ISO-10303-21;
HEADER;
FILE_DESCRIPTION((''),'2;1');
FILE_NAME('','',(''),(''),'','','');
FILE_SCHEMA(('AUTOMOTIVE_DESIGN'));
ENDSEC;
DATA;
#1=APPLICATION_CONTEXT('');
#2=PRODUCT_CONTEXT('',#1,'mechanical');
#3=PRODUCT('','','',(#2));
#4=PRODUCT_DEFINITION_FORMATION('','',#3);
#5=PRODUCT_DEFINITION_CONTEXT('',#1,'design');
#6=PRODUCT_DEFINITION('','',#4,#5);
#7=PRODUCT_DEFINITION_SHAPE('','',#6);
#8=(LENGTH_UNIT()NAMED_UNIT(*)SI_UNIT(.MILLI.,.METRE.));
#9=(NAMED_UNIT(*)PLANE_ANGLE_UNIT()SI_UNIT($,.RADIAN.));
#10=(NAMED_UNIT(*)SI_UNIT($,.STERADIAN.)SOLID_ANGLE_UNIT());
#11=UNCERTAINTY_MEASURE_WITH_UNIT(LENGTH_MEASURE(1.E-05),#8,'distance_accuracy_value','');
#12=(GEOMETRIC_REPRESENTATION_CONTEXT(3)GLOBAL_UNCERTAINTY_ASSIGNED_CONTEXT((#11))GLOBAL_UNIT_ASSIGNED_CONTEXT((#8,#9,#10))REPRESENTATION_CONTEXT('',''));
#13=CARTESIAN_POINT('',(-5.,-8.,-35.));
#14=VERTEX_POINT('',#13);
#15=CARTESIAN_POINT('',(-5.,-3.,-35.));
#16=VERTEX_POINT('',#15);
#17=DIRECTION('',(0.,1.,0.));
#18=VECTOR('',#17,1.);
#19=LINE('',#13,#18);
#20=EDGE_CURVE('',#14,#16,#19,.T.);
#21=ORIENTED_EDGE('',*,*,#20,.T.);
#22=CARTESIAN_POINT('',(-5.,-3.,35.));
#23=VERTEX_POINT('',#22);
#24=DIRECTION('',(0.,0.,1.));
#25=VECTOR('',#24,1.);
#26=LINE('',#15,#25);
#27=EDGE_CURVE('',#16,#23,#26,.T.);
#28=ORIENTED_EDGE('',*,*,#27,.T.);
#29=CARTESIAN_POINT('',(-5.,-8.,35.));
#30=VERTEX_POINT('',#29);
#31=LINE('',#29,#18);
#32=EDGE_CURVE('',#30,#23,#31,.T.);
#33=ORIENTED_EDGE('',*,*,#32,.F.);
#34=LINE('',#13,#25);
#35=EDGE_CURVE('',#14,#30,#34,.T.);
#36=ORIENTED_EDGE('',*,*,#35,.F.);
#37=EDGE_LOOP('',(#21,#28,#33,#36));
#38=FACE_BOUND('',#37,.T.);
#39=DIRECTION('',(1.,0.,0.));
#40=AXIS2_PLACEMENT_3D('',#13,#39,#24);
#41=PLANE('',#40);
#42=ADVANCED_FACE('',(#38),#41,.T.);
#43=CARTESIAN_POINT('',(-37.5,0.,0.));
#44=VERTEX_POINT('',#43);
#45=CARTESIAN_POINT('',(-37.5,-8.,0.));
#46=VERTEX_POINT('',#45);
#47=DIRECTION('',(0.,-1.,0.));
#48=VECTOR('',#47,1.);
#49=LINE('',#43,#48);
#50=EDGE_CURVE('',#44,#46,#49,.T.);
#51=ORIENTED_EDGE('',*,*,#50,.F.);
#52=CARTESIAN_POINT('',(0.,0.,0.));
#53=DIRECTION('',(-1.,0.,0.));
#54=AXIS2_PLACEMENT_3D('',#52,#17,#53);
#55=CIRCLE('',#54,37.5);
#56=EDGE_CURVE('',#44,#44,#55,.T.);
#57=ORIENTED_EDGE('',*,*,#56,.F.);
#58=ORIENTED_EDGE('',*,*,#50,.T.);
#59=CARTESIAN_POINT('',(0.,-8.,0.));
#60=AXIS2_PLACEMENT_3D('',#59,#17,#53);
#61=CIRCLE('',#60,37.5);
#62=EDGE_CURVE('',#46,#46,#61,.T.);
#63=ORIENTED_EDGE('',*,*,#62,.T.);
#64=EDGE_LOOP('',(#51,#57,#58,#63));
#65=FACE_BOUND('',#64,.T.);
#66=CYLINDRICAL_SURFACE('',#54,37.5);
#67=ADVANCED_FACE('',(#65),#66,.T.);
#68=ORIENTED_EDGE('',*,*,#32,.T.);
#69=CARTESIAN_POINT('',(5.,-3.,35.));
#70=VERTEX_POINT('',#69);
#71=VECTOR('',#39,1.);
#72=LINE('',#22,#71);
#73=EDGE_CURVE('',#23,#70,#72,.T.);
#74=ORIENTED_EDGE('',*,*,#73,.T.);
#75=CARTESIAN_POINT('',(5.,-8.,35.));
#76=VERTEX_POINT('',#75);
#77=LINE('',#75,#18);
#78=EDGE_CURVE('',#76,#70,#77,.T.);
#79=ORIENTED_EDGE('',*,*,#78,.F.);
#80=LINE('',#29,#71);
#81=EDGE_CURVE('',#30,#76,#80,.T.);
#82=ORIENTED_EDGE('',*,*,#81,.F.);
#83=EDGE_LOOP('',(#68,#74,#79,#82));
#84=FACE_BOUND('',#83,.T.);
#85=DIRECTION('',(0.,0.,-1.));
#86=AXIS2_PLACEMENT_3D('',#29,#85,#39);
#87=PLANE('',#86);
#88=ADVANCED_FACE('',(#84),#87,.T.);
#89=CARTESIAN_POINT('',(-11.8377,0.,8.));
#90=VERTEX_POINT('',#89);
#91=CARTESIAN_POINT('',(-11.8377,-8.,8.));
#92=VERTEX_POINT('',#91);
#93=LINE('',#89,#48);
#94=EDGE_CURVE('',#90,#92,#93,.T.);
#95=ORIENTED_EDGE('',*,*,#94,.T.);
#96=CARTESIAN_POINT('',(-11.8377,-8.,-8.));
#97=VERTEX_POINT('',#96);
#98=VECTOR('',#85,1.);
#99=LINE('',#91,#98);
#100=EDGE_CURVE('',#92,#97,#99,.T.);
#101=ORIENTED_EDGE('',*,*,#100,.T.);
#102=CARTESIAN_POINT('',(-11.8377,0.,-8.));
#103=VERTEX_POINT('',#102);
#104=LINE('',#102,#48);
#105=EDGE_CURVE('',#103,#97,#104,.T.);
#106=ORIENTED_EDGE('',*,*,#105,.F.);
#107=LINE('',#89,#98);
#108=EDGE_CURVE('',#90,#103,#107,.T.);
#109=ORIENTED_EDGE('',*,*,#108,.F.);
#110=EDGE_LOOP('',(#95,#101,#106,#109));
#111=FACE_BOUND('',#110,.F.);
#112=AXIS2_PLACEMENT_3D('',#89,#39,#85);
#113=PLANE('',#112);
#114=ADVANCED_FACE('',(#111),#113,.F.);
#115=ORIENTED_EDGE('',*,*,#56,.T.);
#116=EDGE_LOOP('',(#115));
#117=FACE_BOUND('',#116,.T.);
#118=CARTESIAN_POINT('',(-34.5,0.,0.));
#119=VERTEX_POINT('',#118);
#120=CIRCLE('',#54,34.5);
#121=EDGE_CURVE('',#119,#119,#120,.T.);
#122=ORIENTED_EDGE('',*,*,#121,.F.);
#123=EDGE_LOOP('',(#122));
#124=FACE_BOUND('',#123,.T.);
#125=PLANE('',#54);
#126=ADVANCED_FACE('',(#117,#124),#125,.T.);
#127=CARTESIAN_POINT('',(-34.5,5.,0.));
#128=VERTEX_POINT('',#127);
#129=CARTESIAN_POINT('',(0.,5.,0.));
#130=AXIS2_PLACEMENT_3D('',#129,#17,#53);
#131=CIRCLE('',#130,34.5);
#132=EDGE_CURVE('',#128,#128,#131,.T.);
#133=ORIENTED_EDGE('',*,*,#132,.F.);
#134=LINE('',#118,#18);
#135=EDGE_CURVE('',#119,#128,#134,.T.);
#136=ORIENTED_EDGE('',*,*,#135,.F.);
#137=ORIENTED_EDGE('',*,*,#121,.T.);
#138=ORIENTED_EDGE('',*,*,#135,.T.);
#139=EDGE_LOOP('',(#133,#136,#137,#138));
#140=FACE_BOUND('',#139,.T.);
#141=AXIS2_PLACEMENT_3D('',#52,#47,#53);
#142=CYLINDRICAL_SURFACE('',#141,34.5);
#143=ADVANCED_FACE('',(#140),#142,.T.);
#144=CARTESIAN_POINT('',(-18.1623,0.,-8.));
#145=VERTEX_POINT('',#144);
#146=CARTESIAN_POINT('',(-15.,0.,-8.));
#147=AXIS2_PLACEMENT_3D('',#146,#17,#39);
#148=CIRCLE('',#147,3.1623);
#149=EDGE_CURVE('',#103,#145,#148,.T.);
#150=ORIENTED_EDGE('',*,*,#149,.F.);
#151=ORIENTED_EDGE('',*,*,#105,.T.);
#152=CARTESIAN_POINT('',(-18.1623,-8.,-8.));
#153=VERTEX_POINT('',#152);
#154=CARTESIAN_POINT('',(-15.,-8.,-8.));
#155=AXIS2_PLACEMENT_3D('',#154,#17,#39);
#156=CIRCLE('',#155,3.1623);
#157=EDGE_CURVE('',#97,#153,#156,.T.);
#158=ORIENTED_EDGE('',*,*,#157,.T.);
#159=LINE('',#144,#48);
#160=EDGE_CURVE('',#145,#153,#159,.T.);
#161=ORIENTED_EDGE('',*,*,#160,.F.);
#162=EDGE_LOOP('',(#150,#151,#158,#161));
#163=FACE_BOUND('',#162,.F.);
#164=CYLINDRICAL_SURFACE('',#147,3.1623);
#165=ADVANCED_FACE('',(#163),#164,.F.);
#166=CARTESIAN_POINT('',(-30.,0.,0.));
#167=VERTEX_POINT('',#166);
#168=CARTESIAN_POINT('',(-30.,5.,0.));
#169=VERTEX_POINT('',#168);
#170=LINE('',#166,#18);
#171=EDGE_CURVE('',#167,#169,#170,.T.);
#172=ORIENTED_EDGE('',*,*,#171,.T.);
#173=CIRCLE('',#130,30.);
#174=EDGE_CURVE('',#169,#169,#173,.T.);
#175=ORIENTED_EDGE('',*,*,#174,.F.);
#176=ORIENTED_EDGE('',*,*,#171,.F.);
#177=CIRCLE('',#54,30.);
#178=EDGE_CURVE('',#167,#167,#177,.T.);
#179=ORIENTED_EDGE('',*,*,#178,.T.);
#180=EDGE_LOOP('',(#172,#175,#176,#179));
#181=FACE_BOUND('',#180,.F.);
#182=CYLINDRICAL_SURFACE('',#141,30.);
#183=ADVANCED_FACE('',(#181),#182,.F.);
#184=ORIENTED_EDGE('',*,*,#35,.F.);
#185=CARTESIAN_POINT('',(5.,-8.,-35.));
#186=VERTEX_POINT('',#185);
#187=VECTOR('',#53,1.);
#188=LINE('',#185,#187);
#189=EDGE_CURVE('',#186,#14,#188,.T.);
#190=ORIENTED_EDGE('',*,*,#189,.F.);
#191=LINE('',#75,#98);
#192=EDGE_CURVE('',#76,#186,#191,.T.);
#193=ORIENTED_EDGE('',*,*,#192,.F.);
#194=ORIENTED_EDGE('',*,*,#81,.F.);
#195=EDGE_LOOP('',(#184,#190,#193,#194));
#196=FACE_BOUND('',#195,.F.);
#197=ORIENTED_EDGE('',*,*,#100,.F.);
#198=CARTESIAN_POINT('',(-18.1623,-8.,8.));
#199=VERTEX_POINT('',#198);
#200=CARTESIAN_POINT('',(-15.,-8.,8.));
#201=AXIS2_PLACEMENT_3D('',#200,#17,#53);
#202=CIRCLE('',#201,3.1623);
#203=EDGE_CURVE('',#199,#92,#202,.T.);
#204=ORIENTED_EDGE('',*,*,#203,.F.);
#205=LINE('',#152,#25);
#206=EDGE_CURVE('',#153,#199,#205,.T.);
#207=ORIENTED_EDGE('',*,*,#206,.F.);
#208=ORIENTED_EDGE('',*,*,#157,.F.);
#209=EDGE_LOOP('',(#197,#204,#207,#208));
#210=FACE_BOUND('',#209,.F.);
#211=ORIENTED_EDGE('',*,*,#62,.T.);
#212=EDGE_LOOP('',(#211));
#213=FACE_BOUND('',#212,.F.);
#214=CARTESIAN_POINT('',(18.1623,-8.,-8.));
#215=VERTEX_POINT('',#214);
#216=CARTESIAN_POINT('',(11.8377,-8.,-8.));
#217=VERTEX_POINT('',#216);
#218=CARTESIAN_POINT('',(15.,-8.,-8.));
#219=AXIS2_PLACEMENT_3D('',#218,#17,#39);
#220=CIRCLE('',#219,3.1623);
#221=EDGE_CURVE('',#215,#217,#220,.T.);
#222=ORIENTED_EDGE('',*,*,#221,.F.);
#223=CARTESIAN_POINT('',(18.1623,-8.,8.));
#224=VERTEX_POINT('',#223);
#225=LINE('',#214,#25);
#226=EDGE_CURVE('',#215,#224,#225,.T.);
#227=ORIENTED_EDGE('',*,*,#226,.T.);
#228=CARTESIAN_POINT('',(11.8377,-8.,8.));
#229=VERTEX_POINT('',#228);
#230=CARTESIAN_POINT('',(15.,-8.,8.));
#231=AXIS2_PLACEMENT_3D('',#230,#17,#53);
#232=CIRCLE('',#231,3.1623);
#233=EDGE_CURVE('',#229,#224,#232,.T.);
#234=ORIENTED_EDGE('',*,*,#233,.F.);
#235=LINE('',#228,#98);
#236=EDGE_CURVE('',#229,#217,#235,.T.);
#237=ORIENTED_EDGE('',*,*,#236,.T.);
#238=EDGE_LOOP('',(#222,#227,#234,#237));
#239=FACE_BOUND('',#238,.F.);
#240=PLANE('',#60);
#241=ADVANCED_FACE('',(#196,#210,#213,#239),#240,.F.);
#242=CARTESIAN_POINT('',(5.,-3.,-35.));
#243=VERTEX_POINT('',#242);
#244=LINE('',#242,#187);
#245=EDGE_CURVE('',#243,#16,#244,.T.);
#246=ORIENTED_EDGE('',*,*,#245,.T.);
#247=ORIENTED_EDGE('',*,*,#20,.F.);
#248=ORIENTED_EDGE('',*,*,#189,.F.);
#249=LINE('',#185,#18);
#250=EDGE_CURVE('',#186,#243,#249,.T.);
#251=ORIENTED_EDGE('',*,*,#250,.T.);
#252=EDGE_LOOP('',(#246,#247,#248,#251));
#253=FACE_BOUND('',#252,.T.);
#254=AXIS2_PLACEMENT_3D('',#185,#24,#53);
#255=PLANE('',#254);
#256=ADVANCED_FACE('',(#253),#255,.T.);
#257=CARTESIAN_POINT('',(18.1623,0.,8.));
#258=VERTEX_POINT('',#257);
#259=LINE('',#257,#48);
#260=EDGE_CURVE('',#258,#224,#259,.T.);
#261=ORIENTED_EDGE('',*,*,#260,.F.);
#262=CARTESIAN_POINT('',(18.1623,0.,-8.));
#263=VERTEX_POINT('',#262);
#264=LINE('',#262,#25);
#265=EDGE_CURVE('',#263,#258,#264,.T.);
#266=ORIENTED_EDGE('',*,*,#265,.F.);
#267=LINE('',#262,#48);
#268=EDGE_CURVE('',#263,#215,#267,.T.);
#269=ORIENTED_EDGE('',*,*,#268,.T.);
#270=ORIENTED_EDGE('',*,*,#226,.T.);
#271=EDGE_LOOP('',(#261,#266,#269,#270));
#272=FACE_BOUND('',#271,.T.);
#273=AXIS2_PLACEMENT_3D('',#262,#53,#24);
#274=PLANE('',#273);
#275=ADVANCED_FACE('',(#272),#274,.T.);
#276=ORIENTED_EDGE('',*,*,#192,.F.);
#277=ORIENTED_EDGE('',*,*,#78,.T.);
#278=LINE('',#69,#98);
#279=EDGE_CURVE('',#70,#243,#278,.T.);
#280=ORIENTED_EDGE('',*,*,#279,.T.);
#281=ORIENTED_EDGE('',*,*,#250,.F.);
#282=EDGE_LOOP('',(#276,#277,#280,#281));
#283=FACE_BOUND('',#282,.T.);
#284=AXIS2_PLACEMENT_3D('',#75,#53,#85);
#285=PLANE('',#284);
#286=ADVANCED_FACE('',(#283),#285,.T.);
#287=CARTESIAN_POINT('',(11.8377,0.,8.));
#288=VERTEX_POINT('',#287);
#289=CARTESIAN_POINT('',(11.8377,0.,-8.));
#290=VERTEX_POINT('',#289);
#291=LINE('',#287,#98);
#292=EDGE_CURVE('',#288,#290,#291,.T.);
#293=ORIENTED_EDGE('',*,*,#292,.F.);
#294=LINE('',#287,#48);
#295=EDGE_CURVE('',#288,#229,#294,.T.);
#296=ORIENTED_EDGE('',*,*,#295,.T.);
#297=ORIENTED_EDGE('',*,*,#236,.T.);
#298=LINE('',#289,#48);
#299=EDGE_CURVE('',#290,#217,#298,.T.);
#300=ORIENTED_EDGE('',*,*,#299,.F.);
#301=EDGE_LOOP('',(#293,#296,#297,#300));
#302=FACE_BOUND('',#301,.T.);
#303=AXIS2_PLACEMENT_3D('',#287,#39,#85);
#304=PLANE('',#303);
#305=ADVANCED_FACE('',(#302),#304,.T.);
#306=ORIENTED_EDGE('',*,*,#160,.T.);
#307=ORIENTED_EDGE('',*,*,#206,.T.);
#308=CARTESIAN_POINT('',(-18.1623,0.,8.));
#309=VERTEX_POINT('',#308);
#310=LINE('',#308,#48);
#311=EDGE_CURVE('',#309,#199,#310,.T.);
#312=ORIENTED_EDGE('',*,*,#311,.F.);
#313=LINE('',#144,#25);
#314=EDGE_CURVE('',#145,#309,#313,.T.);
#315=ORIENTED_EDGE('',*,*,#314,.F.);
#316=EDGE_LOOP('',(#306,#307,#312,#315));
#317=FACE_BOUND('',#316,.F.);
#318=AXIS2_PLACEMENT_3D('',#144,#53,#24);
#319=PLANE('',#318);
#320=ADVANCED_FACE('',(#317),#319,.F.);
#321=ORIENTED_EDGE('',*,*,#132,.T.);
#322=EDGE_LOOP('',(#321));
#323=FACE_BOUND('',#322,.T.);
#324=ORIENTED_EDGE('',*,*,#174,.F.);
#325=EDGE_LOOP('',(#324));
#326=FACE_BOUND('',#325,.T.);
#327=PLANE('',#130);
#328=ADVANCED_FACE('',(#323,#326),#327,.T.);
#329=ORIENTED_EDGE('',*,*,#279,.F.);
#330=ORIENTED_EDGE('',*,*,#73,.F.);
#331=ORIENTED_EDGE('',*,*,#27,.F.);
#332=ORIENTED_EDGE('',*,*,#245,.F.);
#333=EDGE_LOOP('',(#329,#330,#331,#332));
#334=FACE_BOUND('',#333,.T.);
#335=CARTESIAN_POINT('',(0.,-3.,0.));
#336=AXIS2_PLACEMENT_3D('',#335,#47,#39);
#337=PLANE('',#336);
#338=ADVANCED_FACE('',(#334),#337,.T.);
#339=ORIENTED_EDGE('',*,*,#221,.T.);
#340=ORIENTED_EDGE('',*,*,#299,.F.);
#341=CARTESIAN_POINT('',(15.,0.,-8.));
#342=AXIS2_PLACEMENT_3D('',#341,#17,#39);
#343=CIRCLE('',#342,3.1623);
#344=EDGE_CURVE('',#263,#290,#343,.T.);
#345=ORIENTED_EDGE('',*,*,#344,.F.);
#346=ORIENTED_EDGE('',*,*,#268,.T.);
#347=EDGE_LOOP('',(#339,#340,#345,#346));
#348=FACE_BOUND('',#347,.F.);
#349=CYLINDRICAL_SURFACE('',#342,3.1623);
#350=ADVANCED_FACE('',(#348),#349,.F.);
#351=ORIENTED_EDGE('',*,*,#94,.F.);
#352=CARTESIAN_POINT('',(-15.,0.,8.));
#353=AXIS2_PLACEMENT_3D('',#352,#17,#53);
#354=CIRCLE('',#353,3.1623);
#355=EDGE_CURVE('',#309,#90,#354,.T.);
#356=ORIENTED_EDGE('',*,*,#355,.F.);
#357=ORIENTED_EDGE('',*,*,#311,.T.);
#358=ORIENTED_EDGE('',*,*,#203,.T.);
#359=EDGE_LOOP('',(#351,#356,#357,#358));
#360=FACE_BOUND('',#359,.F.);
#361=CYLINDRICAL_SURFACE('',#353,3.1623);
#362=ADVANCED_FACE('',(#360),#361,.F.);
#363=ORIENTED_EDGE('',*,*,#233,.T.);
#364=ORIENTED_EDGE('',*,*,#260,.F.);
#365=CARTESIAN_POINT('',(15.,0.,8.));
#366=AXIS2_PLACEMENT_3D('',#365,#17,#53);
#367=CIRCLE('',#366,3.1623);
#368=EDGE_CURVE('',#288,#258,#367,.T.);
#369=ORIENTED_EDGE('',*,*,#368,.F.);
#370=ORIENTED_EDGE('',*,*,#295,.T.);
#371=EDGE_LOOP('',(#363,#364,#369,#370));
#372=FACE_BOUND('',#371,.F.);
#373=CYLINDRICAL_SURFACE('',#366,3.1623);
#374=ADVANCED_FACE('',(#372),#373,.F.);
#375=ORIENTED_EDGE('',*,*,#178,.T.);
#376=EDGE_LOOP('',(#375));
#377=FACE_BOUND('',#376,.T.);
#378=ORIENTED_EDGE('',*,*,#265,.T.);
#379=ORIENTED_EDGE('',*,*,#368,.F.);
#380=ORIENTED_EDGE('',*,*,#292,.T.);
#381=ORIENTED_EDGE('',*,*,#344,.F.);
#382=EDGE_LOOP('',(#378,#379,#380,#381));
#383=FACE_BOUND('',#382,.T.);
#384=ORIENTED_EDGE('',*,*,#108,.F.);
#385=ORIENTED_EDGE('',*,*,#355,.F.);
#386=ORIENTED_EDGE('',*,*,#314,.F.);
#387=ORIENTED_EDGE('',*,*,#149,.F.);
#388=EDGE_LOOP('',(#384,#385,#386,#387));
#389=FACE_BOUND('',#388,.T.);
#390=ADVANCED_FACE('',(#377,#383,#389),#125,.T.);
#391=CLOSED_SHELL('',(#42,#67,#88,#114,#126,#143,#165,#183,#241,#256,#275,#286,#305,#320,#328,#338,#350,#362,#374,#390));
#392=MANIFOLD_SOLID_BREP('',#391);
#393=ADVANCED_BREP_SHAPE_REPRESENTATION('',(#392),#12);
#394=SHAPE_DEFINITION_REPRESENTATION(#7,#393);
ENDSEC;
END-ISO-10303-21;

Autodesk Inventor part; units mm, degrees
ref_plane "YZ Plane" through (0, 0, 0) normal (1, 0, 0) x (0, 1, 0)
ref_plane "XZ Plane" through (0, 0, 0) normal (0, 1, 0) x (-1, 0, 0)
ref_plane "XY Plane" through (0, 0, 0) normal (0, 0, 1) x (1, 0, 0)
sketch "Sketch1" plane through (0, 0, 0) normal (0, 1, 0) x (-1, 0, 0)
  circle A0 centre (0, 0) radius 34.5
  circle A1 centre (0, 0) radius 37.5
  circle A2 centre (0, 0) radius 30
  line L0 (15, 8) -> (15, -8) construction
  line L1 (11.8377, 8) -> (11.8377, -8)
  line L2 (18.1623, -8) -> (18.1623, 8)
  arc A3 (18.1623, 8) -> (11.8377, 8) centre (15, 8) ccw
  arc A4 (11.8377, -8) -> (18.1623, -8) centre (15, -8) ccw
  line L3 (0, 16.7478) -> (0, 6) construction
  line L4 (-11.8377, 8) -> (-11.8377, -8)
  line L5 (-18.1623, -8) -> (-18.1623, 8)
  arc A5 (-11.8377, 8) -> (-18.1623, 8) centre (-15, 8) ccw
  arc A6 (-18.1623, -8) -> (-11.8377, -8) centre (-15, -8) ccw
  point P0 (15, 0)
  dimension "d0" = 69
  dimension "d1" = 75
  dimension "d2" = 60
  dimension "d3" = 15
  dimension "d4" = 16
  dimension "d5" = 8
  dimension "d6" = 3.1623
  dimension "d7" = 6
  dimension "d8" = 15
  dimension "d9" = 16.7478
extrude "Extrusion1" add sketch "Sketch1" against normal blind 8 contours A0 | A1 | A2
extrude "Extrusion2" add sketch "Sketch1" along normal blind 5 contours A0
sketch "Sketch2" plane through (0, -8, 0) normal (0, -1, 0) x (1, 0, 0)
  line L0 (-5, 35) -> (5, 35)
  line L1 (5, 35) -> (5, -35)
  line L2 (5, -35) -> (-5, -35)
  line L3 (-5, -35) -> (-5, 35)
  line L4 (-5, 35) -> (5, -35) construction
  line L5 (5, 35) -> (-5, -35) construction
  point P0 (0, 0)
  point P1 (0, 35)
  dimension "d16" = 10
  dimension "d17" = 70
extrude "Extrusion3" cut sketch "Sketch2" against normal blind 5
properties part number "bay_bottom"
